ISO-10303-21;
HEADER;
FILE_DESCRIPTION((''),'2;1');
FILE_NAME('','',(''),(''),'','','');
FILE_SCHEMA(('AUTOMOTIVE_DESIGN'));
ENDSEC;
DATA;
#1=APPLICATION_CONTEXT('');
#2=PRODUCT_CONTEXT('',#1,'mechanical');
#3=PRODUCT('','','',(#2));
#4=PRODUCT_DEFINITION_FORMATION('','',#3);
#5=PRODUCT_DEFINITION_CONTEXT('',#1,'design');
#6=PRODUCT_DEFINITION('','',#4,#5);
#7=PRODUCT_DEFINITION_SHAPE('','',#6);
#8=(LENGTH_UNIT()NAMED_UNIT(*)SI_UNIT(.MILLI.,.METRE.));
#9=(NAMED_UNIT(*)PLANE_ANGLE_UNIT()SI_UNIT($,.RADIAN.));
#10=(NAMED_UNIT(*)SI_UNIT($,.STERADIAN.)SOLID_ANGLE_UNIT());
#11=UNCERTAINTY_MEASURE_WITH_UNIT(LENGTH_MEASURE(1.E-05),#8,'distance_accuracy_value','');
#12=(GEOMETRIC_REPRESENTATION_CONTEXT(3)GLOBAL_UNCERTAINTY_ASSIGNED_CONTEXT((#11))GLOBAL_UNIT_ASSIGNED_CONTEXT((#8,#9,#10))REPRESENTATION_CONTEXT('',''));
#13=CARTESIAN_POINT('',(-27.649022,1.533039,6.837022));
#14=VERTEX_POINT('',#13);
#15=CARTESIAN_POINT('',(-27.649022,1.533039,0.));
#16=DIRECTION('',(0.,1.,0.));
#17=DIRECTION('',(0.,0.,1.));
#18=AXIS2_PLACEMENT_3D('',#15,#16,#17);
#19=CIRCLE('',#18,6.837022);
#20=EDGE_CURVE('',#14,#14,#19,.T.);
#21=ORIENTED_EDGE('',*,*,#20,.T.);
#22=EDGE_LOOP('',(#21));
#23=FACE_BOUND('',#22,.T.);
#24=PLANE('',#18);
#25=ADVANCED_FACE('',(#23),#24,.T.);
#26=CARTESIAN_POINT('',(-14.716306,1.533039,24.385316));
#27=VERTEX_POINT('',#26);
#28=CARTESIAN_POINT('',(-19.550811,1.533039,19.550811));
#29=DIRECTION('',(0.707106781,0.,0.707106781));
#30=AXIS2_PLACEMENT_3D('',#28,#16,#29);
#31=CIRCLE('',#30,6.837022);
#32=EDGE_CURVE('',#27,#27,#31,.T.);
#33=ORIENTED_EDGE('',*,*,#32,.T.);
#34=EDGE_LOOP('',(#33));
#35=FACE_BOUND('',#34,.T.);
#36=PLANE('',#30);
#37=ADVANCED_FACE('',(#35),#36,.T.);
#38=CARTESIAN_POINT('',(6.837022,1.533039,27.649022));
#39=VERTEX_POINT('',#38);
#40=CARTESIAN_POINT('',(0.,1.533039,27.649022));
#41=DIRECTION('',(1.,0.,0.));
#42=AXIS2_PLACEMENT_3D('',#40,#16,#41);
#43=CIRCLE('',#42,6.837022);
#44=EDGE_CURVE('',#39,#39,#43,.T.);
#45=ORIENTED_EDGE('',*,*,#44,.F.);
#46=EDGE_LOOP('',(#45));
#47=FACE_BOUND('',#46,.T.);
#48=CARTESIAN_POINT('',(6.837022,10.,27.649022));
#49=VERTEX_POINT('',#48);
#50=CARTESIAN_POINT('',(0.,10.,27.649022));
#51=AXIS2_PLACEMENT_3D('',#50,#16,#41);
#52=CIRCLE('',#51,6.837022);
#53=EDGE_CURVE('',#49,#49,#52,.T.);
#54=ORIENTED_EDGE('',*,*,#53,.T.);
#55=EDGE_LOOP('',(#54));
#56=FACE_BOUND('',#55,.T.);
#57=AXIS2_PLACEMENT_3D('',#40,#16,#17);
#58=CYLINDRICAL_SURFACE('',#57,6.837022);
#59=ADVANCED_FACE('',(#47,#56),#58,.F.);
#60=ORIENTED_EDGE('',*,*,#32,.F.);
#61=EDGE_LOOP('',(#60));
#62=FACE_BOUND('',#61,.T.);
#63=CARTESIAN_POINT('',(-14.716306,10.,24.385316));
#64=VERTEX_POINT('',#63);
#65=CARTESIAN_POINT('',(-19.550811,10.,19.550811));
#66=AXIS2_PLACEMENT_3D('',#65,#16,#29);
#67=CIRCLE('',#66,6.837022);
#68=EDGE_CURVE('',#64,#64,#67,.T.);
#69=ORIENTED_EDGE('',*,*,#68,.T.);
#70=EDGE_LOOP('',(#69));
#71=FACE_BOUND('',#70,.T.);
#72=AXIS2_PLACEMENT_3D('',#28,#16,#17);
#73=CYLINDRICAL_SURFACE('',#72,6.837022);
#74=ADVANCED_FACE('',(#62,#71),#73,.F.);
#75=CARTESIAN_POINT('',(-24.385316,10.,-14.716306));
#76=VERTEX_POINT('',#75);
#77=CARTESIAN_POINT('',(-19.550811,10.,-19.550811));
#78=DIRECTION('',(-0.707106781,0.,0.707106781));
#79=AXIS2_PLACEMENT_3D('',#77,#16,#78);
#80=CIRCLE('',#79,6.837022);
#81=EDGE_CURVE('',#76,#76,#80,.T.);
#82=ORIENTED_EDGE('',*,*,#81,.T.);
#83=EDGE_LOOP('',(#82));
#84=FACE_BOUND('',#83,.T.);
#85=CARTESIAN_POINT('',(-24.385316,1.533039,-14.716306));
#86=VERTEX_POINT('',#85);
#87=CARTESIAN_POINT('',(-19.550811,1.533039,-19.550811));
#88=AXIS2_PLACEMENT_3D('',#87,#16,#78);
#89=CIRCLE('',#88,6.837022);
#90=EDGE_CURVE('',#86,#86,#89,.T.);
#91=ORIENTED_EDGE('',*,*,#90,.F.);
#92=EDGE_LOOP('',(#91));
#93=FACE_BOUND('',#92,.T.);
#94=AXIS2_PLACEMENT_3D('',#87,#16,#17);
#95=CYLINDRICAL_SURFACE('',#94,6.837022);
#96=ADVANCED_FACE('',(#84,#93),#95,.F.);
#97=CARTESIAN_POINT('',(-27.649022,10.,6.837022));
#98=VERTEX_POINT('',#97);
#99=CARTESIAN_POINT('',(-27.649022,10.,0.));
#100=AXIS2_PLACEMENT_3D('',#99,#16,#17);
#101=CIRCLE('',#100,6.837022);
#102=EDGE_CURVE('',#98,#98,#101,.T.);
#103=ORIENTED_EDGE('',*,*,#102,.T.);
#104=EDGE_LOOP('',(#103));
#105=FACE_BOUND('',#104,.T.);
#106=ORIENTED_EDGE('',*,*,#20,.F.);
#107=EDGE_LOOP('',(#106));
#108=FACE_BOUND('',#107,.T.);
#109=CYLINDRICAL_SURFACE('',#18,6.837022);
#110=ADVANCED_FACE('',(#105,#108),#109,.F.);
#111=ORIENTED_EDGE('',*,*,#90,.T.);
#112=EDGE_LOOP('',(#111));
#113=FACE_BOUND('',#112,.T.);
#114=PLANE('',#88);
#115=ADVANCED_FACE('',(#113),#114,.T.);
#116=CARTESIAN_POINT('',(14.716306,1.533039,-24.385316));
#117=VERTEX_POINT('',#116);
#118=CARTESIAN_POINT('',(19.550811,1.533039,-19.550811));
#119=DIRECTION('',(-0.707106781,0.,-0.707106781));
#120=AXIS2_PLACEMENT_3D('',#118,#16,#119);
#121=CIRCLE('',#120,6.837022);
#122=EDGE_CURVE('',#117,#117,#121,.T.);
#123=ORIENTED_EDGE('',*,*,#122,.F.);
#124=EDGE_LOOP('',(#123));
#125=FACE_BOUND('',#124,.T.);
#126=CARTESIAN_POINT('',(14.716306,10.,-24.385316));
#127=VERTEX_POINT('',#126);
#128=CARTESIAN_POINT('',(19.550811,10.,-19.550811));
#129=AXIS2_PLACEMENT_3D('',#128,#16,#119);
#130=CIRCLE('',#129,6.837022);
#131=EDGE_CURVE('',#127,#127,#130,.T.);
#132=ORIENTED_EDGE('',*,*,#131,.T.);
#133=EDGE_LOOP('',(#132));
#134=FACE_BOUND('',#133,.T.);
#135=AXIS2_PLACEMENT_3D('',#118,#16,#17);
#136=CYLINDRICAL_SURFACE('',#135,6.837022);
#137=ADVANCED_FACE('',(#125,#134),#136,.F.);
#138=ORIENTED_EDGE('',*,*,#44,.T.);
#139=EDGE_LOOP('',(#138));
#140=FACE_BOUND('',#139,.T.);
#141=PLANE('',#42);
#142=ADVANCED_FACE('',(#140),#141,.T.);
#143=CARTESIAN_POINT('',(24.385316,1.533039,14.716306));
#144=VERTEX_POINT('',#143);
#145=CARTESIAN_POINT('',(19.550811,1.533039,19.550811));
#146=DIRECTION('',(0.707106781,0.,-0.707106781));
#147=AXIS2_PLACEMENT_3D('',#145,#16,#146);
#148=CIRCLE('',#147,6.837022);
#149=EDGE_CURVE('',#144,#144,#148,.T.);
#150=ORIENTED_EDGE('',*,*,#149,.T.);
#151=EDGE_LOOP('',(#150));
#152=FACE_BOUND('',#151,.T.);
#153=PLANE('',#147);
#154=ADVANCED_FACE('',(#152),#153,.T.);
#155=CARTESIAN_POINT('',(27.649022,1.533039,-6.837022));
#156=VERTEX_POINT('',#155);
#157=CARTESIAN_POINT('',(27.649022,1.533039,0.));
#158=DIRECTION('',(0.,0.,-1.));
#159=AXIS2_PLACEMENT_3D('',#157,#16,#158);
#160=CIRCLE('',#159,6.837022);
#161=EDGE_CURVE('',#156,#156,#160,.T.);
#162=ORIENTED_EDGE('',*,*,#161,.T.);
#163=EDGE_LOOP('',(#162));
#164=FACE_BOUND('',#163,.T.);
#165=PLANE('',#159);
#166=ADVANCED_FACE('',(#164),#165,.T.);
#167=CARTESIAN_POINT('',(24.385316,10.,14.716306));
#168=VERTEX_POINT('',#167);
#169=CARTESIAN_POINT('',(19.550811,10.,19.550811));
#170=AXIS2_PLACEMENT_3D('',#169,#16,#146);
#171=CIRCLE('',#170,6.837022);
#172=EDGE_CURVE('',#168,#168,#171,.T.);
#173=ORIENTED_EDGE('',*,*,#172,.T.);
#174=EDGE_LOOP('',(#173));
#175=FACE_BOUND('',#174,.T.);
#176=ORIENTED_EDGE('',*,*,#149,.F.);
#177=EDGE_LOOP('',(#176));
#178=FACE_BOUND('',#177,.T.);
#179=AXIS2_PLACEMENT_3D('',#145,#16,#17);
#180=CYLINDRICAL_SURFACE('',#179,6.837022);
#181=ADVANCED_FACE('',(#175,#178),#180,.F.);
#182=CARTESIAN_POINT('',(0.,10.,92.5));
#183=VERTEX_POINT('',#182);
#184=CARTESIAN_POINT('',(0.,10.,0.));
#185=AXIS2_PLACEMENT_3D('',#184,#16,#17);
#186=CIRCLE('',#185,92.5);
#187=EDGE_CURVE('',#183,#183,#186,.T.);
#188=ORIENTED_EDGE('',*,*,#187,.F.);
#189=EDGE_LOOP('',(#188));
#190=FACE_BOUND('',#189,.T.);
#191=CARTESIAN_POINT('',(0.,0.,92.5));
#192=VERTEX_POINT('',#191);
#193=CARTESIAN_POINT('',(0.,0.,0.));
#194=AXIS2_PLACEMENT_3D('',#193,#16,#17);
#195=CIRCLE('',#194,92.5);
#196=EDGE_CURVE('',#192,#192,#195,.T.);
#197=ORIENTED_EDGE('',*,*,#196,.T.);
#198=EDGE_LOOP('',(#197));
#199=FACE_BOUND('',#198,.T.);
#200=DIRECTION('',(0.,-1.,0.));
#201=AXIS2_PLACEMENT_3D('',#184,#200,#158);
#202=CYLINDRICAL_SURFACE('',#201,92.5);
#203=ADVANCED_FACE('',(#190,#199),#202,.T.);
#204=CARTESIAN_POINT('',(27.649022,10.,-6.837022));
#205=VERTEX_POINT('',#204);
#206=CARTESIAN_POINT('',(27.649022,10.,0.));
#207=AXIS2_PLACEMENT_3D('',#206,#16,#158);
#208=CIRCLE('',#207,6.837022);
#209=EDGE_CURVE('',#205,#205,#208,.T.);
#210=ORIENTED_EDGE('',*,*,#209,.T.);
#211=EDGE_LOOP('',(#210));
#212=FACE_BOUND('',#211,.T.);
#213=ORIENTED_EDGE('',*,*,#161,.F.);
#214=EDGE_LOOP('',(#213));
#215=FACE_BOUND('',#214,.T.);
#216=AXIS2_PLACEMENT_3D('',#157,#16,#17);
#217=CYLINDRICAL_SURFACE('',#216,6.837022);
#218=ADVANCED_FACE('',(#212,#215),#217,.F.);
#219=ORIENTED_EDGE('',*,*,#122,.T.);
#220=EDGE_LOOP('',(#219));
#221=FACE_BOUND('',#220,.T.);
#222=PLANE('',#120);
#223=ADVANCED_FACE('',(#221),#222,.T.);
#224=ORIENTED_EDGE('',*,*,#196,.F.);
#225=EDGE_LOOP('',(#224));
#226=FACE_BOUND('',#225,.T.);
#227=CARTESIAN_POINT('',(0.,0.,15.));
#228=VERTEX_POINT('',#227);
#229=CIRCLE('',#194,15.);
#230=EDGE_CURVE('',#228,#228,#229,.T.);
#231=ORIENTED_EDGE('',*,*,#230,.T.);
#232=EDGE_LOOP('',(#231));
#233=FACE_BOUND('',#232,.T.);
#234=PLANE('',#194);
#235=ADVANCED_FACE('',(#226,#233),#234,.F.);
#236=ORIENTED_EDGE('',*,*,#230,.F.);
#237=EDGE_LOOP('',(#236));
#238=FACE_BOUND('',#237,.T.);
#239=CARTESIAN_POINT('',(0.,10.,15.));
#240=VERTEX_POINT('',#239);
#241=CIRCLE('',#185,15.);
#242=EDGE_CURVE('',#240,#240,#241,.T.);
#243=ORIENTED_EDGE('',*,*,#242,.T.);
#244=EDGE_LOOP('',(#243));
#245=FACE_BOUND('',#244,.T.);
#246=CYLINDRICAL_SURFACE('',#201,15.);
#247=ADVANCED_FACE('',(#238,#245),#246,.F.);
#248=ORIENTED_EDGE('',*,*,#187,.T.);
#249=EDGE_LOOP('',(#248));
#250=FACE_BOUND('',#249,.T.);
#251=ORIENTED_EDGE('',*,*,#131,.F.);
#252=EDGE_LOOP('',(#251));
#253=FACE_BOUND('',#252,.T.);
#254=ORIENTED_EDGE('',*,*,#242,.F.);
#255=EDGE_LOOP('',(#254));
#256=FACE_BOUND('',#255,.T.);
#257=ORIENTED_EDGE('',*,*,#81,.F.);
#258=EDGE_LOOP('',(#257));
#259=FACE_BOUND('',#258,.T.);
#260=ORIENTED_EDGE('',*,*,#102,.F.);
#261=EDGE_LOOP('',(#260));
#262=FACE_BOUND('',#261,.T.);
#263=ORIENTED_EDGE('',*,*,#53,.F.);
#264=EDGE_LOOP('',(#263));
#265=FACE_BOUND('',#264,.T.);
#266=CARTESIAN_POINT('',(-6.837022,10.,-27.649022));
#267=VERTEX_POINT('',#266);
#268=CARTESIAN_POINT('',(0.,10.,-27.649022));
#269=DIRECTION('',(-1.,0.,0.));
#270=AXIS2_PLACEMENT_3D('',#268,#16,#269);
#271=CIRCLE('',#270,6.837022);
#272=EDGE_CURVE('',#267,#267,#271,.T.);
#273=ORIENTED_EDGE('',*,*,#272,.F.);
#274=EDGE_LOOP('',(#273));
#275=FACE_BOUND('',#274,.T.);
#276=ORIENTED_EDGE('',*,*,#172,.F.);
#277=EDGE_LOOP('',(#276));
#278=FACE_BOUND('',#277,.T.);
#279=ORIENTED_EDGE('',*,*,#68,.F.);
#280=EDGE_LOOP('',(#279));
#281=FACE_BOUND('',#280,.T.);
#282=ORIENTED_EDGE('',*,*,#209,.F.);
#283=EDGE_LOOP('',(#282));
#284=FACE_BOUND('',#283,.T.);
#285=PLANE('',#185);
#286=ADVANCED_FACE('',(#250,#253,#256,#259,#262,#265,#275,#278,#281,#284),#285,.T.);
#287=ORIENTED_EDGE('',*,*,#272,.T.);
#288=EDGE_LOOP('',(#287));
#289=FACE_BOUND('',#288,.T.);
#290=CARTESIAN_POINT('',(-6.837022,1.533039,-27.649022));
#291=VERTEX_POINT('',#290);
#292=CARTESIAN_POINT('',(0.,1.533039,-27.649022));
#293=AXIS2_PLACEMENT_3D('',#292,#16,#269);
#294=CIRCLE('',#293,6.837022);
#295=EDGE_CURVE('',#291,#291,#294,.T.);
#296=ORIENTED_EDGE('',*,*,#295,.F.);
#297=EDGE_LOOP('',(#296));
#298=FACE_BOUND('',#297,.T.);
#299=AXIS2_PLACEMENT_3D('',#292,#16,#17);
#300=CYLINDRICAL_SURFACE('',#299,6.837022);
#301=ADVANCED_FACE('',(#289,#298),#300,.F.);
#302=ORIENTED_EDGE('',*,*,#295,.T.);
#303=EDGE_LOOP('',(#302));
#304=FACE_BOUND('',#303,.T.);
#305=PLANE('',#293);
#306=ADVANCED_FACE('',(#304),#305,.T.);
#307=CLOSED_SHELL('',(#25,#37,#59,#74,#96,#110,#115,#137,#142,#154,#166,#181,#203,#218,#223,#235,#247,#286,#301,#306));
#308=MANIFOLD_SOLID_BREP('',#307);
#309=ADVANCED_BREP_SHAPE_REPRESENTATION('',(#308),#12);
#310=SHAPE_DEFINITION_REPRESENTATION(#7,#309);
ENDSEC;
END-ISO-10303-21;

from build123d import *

# Parameters (mm, degrees)
SKETCH1_R           = 92.5
BOSS_EXTRUDE1_DEPTH = 10
SKETCH2_R           = 15
CUT_EXTRUDE1_DEPTH  = 132.196417634
SKETCH3_R           = 6.837022299
CUT_EXTRUDE2_DEPTH  = 8.46696136
CIRPATTERN1_COUNT   = 8


with BuildPart() as part:
    # Sketch1 → Boss-Extrude1 (new body)
    with BuildSketch(Plane(origin=(0, 0, 0), x_dir=(1, 0, 0), z_dir=(0, 1, 0))):
        Circle(SKETCH1_R)
    extrude(amount=BOSS_EXTRUDE1_DEPTH)

    # Sketch2 → Cut-Extrude1 (cut, through all)
    with BuildSketch(Plane(origin=(0, 0, 0), x_dir=(1, 0, 0), z_dir=(0, 1, 0))):
        Circle(SKETCH2_R)
    extrude(amount=CUT_EXTRUDE1_DEPTH, mode=Mode.SUBTRACT)

    # Sketch3 → Cut-Extrude2 (cut)
    with BuildSketch(Plane(origin=(0, 10, 0), x_dir=(1, 0, 0), z_dir=(0, 1, 0))):
        with Locations((-27.649021732, 0)):
            Circle(SKETCH3_R)
    cut_extrude2 = extrude(amount=-CUT_EXTRUDE2_DEPTH, mode=Mode.SUBTRACT)

    # CirPattern1: Cut-Extrude2 ×8 about axis
    cirpattern1_axis = Axis((0, 0, 0), (0, 1, 0))
    for i in range(1, CIRPATTERN1_COUNT):
        add(cut_extrude2.rotate(cirpattern1_axis, i * 360 / CIRPATTERN1_COUNT), mode=Mode.SUBTRACT)


solid = part.part
